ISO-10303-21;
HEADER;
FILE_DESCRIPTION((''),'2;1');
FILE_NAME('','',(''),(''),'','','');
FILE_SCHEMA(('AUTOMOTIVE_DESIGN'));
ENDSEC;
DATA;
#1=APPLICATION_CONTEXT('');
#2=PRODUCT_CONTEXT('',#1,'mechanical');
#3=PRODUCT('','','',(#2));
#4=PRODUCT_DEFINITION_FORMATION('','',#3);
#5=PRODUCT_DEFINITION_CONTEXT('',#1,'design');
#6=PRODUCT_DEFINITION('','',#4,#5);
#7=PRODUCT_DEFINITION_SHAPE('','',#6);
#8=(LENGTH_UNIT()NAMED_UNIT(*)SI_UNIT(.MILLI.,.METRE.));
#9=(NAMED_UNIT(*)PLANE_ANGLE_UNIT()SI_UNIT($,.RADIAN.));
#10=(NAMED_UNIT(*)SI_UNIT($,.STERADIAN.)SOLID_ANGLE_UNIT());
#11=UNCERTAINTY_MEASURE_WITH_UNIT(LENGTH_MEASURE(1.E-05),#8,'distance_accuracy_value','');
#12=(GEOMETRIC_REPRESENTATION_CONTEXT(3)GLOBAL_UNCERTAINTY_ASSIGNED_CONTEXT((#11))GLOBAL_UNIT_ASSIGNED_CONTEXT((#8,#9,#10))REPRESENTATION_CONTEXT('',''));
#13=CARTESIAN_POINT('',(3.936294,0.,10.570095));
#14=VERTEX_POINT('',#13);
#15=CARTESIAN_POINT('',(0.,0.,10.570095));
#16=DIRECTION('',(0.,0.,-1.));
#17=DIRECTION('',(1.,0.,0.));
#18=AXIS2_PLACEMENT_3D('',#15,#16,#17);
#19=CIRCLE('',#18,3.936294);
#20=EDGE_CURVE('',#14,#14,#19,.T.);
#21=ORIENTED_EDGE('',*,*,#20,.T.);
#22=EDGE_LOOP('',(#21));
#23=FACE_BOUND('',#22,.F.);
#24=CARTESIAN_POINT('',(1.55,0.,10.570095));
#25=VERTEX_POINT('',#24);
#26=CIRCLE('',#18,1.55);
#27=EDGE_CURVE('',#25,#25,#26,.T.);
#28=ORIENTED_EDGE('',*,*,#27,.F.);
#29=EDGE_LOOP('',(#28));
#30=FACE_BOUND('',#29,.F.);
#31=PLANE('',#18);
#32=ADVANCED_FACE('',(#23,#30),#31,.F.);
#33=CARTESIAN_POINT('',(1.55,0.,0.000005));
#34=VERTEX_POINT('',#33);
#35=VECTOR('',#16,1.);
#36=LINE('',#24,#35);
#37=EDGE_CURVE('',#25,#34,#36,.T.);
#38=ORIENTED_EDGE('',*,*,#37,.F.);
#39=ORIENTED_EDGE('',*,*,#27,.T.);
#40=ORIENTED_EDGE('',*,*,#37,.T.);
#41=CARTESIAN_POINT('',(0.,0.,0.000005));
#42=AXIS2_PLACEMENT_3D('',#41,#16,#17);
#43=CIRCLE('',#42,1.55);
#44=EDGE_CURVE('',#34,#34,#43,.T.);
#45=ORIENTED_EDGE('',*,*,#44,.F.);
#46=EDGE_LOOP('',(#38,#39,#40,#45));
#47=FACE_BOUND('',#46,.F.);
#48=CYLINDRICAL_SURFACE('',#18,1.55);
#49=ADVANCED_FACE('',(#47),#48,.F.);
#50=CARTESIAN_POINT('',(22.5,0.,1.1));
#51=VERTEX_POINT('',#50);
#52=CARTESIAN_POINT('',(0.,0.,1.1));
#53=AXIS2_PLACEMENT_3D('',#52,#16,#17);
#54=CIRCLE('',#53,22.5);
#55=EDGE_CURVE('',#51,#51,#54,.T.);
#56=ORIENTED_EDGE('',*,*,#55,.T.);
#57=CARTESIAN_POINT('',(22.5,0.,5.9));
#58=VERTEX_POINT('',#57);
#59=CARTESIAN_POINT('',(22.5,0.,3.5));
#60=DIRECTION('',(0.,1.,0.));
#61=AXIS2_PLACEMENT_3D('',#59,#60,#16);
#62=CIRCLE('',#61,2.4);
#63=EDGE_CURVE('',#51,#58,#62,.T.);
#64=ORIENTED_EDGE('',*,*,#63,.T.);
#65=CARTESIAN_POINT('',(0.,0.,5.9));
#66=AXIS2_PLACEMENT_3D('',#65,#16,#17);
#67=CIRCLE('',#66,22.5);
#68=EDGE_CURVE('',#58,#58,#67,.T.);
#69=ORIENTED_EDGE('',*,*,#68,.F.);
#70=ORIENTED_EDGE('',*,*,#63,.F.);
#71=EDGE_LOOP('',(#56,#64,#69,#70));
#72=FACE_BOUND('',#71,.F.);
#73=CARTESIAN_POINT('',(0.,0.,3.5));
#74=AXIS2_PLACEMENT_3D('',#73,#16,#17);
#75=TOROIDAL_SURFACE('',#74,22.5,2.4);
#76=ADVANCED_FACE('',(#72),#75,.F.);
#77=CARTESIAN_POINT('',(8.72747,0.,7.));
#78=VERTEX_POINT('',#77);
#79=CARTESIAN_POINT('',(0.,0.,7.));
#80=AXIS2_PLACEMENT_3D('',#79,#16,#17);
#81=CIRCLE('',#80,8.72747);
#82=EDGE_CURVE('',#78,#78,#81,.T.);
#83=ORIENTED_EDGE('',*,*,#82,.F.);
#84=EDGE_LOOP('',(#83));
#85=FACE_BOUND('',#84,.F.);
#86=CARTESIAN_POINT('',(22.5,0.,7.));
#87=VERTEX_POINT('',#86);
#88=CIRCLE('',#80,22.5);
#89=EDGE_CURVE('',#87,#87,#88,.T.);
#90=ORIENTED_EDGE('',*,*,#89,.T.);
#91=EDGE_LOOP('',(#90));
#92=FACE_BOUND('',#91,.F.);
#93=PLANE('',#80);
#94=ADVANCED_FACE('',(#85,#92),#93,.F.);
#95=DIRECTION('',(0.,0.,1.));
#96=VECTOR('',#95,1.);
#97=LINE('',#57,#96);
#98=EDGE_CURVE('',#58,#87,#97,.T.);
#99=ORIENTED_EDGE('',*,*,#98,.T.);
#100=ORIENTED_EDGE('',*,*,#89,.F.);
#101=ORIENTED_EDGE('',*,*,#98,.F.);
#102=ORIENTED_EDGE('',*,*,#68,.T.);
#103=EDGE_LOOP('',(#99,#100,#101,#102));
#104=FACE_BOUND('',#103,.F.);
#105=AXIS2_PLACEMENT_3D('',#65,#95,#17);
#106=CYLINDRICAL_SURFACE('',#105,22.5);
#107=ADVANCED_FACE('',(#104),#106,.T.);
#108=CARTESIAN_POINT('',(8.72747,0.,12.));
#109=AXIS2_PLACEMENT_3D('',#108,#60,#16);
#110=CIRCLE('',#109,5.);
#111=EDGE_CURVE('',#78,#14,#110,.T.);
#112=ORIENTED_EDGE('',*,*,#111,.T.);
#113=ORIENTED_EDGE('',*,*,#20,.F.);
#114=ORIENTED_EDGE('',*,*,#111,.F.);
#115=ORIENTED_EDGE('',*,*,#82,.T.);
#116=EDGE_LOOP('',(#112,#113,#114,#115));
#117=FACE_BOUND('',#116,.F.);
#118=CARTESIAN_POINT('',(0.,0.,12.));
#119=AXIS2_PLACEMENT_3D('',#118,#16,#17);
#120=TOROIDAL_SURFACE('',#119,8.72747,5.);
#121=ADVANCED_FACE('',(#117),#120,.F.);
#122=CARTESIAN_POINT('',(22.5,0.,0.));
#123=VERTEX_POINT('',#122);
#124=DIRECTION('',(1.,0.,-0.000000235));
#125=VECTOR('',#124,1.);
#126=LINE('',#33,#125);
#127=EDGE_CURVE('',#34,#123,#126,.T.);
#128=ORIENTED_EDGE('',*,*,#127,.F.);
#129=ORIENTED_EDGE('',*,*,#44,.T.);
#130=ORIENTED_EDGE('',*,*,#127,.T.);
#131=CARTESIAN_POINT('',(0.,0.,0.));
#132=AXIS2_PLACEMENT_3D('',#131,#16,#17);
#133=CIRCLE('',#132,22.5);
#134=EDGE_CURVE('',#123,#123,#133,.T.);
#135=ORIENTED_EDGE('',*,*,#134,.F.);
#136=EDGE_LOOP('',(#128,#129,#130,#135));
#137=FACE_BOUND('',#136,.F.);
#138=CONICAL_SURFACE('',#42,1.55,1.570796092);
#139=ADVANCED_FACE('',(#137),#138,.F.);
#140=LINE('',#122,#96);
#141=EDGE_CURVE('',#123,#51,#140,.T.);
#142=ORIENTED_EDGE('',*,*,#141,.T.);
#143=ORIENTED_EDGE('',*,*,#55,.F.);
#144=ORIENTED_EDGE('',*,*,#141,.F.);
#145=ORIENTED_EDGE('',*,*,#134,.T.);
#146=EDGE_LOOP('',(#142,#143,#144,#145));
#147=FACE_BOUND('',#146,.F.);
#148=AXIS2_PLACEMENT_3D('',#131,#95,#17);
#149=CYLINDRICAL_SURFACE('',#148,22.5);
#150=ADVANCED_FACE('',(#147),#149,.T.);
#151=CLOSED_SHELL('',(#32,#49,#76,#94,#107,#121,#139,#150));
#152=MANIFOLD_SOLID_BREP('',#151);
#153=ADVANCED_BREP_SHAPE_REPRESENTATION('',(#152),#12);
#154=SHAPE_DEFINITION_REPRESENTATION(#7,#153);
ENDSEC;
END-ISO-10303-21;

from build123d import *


# Not quite as in the source:
# - a fillet or chamfer that OpenCascade refuses, or shapes differently, is made with other operations: its cross-section is extruded or revolved along the edge and cut away or added
# - ends of sketch curves that miss each other by under 0.0002 mm in the source are joined


with BuildPart() as f1:
    # F0 (on Front) → F1 (revolve)
    with BuildSketch(Plane.XZ):
        with BuildLine():
            Line((1.55, 10.5700949207), (1.55, 4.9207e-06))
            Line((1.55, 4.9207e-06), (22.5, 0))
            Line((22.5, 0), (22.5, 1.1))
            ThreePointArc((22.5, 1.1), (20.1, 3.5), (22.5, 5.9))
            Line((22.5, 5.9), (22.5, 7))
            Line((22.5, 7), (3.9362940006, 7))
            Line((3.9362940006, 7), (3.9362940006, 10.5700949207))
            Line((3.9362940006, 10.5700949207), (1.55, 10.5700949207))
        make_face()
    revolve(axis=Axis((0, 0, 5.2850474603), (0, 0, -1)))

    # F2: fillet of radius 5 on 1 edges, made by hand

    # F2_s1 → F2_t2 (revolve)
    with BuildSketch(Plane.XZ):
        with BuildLine():
            ThreePointArc((8.7274704182, 7), (5.739956853, 7.9906655542), (3.9362940006, 10.5700949207))
            Line((3.9362940006, 10.5700949207), (3.9362940006, 7))
            Line((3.9362940006, 7), (8.7274704182, 7))
        make_face()
    revolve(axis=Axis((0, 0, 7), (0, 0, -1)))


solid = f1.part
